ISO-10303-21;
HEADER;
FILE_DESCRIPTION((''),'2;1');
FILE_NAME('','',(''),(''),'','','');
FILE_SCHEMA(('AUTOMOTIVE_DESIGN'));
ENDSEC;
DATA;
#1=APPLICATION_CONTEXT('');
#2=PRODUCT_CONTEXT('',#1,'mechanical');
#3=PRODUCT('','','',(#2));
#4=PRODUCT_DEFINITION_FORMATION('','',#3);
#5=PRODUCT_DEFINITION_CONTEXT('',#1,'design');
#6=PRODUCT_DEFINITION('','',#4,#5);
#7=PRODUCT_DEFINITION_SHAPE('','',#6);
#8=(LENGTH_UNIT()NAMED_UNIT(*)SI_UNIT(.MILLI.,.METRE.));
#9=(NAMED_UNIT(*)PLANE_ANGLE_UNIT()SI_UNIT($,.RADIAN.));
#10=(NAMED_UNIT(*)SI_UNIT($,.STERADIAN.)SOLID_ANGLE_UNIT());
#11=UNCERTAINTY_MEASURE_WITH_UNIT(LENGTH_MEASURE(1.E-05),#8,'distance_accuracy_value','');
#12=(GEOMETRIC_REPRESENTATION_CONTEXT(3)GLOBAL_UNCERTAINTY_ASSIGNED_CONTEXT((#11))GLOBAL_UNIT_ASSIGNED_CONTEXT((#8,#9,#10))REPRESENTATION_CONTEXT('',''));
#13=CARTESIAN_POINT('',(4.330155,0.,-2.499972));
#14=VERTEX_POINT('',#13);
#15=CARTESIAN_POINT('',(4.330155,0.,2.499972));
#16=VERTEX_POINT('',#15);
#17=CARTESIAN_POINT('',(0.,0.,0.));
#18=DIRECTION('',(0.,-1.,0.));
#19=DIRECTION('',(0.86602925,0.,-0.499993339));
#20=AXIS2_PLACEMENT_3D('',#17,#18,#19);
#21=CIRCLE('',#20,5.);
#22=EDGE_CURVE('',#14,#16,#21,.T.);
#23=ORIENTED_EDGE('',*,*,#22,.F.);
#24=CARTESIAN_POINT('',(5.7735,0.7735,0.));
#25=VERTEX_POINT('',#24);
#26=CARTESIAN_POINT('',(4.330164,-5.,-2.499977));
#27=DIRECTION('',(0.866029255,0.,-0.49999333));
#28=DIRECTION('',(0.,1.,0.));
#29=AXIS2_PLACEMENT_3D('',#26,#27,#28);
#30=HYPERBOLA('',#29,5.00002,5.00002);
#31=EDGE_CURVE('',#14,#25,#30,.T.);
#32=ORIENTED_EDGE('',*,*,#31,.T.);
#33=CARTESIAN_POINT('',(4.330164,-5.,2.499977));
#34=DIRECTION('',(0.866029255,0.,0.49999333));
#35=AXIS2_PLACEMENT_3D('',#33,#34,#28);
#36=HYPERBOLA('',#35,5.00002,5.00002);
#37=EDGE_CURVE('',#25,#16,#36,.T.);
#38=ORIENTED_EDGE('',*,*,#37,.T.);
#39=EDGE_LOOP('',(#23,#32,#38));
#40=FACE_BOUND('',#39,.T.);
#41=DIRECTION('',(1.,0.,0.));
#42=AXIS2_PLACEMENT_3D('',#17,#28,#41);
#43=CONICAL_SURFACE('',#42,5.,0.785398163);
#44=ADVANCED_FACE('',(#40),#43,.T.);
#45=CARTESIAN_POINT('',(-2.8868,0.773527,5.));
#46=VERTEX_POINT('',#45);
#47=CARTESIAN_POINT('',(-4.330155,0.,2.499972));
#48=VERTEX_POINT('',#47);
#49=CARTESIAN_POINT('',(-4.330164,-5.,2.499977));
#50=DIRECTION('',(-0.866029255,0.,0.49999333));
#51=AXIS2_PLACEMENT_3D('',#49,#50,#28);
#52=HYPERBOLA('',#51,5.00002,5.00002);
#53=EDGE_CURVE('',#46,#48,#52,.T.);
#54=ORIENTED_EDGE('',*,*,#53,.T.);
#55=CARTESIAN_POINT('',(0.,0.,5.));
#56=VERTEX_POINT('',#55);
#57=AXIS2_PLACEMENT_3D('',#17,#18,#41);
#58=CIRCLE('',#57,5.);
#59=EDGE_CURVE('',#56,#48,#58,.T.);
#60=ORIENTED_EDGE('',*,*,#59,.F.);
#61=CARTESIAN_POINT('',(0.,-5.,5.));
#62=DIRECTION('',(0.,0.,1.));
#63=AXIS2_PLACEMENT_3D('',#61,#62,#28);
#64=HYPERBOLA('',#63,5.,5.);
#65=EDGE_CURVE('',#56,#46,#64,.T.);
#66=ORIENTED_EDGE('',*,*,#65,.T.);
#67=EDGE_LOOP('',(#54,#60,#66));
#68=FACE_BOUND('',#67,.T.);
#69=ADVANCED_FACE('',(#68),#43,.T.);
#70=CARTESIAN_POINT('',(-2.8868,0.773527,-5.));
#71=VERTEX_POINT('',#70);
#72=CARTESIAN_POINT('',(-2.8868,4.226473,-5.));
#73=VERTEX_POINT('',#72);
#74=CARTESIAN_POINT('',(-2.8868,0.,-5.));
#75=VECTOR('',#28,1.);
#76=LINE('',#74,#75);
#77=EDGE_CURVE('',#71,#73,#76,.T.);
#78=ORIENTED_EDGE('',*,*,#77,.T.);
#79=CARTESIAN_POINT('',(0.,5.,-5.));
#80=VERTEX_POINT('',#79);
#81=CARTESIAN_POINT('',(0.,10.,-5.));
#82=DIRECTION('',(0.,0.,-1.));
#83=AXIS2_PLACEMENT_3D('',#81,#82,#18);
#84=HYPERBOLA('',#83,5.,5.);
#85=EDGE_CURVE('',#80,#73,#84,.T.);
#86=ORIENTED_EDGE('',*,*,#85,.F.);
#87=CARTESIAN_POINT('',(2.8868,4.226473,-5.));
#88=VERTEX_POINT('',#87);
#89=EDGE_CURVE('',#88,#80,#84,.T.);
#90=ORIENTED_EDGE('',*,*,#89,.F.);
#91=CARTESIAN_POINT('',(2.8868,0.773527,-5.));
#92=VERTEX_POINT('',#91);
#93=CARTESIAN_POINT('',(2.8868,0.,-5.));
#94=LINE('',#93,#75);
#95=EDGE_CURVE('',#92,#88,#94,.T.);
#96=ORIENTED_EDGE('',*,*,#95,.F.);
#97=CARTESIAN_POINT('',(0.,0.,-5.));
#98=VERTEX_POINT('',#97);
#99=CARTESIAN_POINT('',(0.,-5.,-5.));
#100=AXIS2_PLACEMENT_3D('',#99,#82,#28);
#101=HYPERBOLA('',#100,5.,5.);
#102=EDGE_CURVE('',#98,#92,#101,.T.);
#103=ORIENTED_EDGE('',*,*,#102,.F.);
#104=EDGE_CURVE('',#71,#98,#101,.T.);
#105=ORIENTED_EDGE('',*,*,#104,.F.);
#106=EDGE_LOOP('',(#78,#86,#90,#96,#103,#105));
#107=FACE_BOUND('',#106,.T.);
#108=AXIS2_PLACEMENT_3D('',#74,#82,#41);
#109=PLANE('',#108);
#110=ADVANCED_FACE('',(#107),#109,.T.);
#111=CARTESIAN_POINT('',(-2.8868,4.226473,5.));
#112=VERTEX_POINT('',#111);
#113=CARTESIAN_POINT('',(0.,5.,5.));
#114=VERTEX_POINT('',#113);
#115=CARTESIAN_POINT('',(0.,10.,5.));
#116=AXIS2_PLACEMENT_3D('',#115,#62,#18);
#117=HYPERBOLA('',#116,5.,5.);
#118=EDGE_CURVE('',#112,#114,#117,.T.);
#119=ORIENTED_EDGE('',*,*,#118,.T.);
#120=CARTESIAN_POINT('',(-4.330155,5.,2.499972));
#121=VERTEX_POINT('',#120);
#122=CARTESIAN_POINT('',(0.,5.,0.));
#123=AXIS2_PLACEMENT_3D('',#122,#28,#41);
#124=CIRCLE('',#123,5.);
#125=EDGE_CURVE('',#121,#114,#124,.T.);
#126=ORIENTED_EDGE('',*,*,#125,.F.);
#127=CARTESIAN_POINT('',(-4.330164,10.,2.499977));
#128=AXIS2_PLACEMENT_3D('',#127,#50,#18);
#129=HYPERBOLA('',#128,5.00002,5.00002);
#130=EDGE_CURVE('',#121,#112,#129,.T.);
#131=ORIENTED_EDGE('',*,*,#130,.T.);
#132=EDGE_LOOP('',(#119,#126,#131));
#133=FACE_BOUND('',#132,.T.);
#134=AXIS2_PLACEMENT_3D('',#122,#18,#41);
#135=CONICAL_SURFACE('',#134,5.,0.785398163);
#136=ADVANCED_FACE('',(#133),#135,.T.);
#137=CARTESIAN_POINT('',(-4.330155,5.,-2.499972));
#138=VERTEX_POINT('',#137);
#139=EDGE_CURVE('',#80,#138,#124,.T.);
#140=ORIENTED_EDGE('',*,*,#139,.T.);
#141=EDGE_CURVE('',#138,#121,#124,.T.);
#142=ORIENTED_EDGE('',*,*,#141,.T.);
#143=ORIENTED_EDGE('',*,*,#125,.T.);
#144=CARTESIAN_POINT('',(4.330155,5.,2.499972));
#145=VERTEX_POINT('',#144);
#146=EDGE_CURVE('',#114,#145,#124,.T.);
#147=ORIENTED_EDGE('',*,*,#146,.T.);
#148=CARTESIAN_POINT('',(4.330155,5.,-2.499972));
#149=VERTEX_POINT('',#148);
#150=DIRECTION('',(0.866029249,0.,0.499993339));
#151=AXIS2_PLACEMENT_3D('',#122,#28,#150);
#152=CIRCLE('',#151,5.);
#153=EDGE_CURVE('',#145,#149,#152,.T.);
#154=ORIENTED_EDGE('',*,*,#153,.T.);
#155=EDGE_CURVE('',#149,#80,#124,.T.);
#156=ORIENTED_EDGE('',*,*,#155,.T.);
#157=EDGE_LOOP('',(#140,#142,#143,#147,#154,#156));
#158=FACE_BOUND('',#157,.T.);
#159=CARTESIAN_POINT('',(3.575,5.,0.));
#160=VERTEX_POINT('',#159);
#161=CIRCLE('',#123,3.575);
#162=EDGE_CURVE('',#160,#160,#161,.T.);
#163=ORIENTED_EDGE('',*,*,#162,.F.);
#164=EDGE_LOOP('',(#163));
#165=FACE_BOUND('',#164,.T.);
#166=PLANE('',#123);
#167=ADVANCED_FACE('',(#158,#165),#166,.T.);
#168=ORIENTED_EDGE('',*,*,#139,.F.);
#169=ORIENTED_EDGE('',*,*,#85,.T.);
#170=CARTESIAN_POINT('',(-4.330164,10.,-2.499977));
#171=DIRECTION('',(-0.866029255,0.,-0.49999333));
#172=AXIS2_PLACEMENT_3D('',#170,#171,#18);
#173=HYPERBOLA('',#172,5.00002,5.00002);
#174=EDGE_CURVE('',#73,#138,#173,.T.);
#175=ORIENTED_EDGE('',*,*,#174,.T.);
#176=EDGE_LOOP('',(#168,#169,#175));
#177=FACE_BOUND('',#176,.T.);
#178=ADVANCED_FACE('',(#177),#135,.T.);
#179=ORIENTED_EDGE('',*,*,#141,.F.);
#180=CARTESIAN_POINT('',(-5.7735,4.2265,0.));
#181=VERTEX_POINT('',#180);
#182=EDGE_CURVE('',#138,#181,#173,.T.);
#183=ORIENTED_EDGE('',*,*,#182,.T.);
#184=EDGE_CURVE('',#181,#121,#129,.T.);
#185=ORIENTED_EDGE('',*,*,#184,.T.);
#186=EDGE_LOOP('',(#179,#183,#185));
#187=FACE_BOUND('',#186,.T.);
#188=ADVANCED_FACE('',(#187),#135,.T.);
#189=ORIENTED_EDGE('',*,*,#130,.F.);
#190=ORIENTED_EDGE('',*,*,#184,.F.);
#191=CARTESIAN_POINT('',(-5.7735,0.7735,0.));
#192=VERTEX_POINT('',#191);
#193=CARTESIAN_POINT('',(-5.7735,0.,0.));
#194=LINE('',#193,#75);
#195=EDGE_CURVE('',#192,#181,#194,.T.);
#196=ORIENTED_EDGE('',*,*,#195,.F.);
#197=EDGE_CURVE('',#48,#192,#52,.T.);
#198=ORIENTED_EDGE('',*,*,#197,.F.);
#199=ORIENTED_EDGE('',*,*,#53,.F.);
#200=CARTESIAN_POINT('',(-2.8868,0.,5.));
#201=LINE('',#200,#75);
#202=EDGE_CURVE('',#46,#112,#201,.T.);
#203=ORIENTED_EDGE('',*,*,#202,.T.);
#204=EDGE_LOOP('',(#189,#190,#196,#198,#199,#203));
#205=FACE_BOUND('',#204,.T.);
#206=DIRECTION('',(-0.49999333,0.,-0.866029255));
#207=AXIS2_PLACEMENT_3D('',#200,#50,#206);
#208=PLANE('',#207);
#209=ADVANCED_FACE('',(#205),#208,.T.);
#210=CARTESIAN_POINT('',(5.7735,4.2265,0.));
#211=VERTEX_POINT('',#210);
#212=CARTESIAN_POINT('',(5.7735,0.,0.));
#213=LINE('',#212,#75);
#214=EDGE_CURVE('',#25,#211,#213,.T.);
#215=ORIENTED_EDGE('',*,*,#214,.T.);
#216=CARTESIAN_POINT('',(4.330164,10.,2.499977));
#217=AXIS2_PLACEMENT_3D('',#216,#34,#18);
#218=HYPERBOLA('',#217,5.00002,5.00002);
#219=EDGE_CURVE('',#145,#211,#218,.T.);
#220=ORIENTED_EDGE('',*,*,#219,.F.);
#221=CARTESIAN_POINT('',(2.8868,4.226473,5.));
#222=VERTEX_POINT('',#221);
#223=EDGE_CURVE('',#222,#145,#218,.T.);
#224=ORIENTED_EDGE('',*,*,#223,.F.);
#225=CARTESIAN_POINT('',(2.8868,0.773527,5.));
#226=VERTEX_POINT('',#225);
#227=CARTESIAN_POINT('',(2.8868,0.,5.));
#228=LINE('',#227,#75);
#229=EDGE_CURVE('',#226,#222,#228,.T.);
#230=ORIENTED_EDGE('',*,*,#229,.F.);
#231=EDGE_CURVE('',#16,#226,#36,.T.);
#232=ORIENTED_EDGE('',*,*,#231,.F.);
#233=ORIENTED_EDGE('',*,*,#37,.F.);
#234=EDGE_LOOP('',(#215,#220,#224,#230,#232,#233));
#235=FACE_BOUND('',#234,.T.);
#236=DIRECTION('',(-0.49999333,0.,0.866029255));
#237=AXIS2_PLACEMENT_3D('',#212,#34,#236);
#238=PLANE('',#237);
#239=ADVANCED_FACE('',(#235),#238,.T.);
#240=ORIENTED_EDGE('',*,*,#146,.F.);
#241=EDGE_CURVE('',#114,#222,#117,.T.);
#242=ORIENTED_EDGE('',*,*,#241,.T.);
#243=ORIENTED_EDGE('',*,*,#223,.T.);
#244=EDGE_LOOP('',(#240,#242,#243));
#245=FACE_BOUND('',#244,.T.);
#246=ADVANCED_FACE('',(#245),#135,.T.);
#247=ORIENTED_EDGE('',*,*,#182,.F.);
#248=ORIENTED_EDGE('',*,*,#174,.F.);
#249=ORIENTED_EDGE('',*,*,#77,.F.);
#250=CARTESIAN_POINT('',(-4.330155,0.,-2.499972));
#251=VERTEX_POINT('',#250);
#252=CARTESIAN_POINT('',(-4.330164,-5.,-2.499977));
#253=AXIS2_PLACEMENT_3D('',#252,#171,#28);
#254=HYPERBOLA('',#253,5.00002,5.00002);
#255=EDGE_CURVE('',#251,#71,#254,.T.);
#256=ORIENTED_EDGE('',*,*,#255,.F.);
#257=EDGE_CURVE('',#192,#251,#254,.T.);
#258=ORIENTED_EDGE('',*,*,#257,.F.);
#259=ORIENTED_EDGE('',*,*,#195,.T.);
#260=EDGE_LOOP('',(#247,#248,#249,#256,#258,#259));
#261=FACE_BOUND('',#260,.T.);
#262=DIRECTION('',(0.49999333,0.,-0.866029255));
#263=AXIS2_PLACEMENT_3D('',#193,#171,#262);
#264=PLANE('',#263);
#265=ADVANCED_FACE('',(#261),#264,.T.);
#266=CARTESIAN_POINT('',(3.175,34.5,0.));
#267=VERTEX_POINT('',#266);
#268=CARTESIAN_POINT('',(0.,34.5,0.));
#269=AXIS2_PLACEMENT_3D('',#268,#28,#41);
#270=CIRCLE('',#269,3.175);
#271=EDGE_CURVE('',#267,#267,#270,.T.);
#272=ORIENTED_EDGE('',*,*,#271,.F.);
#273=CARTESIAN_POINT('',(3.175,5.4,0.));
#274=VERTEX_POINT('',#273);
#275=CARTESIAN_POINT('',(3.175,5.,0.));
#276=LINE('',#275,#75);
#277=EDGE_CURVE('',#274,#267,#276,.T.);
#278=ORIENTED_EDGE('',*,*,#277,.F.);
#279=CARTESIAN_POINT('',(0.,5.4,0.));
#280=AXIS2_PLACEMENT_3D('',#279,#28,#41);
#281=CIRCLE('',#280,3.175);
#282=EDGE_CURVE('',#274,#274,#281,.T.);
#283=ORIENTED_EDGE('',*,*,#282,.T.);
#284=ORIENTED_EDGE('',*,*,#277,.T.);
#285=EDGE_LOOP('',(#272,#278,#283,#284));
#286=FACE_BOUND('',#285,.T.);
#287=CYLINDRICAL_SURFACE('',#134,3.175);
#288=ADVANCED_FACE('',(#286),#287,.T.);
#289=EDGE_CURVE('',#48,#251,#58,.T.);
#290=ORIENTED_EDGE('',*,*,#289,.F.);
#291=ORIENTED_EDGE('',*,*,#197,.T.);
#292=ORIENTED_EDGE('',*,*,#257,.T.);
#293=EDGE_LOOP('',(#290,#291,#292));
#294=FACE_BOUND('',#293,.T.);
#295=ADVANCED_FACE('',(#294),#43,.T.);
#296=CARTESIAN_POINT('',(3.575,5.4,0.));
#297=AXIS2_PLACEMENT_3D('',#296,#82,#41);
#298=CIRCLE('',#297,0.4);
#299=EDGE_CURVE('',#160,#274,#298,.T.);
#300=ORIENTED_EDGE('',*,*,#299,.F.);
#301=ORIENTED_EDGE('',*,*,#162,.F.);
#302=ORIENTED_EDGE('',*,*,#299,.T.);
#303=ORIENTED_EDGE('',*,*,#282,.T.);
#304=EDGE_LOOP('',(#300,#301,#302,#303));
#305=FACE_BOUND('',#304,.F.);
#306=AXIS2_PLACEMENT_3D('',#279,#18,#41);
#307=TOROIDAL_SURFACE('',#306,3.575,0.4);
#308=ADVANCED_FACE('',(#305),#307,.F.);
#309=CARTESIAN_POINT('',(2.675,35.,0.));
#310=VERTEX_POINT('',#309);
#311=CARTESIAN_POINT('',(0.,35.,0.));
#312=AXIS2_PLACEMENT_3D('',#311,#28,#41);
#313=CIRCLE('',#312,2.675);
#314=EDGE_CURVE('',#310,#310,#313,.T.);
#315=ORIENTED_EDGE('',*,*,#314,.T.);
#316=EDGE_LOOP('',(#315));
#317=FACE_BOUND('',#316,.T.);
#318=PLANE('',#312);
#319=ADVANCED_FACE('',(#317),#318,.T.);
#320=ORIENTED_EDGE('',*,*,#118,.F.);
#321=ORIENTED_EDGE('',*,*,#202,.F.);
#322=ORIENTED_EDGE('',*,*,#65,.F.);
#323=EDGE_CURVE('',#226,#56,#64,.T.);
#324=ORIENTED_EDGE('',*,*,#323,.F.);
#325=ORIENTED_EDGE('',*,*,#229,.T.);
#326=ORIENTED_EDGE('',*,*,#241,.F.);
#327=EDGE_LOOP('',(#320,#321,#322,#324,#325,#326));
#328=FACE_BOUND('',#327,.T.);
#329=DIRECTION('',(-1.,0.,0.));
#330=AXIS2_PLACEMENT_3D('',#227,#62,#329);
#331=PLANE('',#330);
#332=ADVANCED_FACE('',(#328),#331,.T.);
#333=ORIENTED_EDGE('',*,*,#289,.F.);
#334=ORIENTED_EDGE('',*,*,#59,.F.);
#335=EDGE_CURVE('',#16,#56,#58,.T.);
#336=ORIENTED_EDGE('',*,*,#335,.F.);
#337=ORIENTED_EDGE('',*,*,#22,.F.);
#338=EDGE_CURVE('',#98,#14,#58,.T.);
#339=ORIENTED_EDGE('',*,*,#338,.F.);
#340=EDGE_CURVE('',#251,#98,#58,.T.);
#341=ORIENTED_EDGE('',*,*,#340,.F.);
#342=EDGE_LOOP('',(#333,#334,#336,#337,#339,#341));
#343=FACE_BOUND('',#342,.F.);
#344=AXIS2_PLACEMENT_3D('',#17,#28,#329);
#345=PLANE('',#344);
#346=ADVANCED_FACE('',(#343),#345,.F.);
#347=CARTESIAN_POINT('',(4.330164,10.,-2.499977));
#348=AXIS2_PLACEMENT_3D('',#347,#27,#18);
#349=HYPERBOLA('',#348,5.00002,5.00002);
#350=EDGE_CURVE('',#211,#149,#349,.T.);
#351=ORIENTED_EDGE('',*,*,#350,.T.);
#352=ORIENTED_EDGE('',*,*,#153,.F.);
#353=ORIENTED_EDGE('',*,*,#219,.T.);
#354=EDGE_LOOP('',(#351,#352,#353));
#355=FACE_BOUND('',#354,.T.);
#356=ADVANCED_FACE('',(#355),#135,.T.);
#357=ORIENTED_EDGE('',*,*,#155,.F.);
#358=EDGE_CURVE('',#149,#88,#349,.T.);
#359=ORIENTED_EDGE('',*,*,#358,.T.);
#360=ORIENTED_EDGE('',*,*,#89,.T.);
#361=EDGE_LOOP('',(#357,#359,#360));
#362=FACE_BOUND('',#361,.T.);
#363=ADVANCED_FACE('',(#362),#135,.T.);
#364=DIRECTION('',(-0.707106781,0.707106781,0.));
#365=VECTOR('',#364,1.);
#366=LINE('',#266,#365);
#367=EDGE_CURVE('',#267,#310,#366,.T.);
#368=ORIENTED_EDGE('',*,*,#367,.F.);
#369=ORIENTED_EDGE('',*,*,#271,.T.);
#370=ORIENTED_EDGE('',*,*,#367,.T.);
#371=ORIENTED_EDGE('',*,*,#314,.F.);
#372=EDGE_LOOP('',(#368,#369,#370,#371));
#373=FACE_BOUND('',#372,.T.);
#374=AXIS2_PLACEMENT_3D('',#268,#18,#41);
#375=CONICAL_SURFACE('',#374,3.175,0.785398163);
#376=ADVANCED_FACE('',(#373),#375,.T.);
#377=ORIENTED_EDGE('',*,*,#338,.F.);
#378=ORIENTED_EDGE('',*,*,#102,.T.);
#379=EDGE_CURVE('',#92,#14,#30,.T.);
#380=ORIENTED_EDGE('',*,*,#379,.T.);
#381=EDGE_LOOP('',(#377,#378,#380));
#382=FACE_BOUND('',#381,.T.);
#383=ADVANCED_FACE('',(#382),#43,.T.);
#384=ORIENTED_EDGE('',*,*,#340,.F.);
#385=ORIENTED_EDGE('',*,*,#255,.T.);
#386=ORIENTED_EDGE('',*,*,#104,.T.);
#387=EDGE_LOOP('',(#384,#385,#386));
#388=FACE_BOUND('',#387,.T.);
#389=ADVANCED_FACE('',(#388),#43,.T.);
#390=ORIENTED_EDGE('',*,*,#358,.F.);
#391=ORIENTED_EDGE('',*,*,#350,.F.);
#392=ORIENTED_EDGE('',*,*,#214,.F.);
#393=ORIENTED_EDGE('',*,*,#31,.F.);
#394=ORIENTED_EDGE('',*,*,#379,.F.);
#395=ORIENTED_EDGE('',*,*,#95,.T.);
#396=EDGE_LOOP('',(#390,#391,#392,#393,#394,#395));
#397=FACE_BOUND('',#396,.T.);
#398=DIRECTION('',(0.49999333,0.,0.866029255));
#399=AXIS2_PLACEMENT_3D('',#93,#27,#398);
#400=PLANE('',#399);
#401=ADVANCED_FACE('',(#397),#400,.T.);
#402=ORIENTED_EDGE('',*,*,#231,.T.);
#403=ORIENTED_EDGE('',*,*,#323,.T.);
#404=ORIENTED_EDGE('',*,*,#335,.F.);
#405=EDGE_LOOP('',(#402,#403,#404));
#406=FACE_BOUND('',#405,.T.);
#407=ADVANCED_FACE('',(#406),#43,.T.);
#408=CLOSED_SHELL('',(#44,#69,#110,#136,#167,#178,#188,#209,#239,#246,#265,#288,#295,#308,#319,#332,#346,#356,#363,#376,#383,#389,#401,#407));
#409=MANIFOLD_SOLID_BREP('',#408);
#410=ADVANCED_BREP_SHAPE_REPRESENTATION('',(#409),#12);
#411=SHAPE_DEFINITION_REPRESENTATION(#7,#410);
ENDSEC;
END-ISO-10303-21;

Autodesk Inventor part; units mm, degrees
ref_plane "YZ Plane" through (0, 0, 0) normal (1, 0, 0) x (0, 1, 0)
ref_plane "XZ Plane" through (0, 0, 0) normal (0, 1, 0) x (-1, 0, 0)
ref_plane "XY Plane" through (0, 0, 0) normal (0, 0, 1) x (1, 0, 0)
sketch "Esboço1" plane through (0, 0, 0) normal (0, 1, 0) x (-1, 0, 0)
  circle A0 centre (0, 0) radius 3
  line L0 (-2.8868, -5) -> (-5.7735, 0)
  line L1 (-5.7735, 0) -> (-2.8868, 5)
  line L2 (-2.8868, 5) -> (2.8868, 5)
  line L3 (2.8868, 5) -> (5.7735, 0)
  line L4 (5.7735, 0) -> (2.8868, -5)
  line L5 (2.8868, -5) -> (-2.8868, -5)
  dimension "d0" = 6
extrude "Extrusão1" add sketch "Esboço1" along normal blind 5
sketch "Esboço2" plane through (0, 0, 0) normal (1, 0, 0) x (0, 1, 0)
  point P0 (0, 0)
chamfer "Chanfro1" distance 0.5 angle 45 2 edges at (3, 0, 0) (3, 5, 0)
sketch "Esboço5" plane through (0, 0, 0) normal (0, -1, 0) x (1, 0, 0)
  circle A0 centre (0, 0) radius 5
extrude "Extrusão2" cut sketch "Esboço5" against normal through all draft 45 keep common part
sketch "Esboço6" plane through (0, 5, 0) normal (0, 1, 0) x (1, 0, 0)
  circle A0 centre (0, 0) radius 5
extrude "Extrusão3" cut sketch "Esboço6" against normal through all draft 45 keep common part
sketch "Esboço7" plane through (0, 5, 0) normal (0, 1, 0) x (1, 0, 0)
  circle A0 centre (0, 0) radius 3.5
extrude "Extrusão4" add sketch "Esboço7" against normal blind 5
sketch "Esboço8" plane through (0, 5, 0) normal (0, 1, 0) x (1, 0, 0)
  circle A0 centre (0, 0) radius 3.175
  dimension "d16" = 6.35
extrude "Extrusão5" add sketch "Esboço8" along normal blind 30
fillet "Arredondamento2" radius 0.4 1 edges at (-3.175, 5, 0)
chamfer "Chanfro3" distance 0.5 angle 45 1 edges at (-3.175, 35, 0)
thread "Rosca3" size "1/4-20 UNC" class "2A" standard "ANSI Unified Screw Threads" full length
properties part number "Parafuso sextavado 1 quarto 30mm" material "Aço inoxidável"
